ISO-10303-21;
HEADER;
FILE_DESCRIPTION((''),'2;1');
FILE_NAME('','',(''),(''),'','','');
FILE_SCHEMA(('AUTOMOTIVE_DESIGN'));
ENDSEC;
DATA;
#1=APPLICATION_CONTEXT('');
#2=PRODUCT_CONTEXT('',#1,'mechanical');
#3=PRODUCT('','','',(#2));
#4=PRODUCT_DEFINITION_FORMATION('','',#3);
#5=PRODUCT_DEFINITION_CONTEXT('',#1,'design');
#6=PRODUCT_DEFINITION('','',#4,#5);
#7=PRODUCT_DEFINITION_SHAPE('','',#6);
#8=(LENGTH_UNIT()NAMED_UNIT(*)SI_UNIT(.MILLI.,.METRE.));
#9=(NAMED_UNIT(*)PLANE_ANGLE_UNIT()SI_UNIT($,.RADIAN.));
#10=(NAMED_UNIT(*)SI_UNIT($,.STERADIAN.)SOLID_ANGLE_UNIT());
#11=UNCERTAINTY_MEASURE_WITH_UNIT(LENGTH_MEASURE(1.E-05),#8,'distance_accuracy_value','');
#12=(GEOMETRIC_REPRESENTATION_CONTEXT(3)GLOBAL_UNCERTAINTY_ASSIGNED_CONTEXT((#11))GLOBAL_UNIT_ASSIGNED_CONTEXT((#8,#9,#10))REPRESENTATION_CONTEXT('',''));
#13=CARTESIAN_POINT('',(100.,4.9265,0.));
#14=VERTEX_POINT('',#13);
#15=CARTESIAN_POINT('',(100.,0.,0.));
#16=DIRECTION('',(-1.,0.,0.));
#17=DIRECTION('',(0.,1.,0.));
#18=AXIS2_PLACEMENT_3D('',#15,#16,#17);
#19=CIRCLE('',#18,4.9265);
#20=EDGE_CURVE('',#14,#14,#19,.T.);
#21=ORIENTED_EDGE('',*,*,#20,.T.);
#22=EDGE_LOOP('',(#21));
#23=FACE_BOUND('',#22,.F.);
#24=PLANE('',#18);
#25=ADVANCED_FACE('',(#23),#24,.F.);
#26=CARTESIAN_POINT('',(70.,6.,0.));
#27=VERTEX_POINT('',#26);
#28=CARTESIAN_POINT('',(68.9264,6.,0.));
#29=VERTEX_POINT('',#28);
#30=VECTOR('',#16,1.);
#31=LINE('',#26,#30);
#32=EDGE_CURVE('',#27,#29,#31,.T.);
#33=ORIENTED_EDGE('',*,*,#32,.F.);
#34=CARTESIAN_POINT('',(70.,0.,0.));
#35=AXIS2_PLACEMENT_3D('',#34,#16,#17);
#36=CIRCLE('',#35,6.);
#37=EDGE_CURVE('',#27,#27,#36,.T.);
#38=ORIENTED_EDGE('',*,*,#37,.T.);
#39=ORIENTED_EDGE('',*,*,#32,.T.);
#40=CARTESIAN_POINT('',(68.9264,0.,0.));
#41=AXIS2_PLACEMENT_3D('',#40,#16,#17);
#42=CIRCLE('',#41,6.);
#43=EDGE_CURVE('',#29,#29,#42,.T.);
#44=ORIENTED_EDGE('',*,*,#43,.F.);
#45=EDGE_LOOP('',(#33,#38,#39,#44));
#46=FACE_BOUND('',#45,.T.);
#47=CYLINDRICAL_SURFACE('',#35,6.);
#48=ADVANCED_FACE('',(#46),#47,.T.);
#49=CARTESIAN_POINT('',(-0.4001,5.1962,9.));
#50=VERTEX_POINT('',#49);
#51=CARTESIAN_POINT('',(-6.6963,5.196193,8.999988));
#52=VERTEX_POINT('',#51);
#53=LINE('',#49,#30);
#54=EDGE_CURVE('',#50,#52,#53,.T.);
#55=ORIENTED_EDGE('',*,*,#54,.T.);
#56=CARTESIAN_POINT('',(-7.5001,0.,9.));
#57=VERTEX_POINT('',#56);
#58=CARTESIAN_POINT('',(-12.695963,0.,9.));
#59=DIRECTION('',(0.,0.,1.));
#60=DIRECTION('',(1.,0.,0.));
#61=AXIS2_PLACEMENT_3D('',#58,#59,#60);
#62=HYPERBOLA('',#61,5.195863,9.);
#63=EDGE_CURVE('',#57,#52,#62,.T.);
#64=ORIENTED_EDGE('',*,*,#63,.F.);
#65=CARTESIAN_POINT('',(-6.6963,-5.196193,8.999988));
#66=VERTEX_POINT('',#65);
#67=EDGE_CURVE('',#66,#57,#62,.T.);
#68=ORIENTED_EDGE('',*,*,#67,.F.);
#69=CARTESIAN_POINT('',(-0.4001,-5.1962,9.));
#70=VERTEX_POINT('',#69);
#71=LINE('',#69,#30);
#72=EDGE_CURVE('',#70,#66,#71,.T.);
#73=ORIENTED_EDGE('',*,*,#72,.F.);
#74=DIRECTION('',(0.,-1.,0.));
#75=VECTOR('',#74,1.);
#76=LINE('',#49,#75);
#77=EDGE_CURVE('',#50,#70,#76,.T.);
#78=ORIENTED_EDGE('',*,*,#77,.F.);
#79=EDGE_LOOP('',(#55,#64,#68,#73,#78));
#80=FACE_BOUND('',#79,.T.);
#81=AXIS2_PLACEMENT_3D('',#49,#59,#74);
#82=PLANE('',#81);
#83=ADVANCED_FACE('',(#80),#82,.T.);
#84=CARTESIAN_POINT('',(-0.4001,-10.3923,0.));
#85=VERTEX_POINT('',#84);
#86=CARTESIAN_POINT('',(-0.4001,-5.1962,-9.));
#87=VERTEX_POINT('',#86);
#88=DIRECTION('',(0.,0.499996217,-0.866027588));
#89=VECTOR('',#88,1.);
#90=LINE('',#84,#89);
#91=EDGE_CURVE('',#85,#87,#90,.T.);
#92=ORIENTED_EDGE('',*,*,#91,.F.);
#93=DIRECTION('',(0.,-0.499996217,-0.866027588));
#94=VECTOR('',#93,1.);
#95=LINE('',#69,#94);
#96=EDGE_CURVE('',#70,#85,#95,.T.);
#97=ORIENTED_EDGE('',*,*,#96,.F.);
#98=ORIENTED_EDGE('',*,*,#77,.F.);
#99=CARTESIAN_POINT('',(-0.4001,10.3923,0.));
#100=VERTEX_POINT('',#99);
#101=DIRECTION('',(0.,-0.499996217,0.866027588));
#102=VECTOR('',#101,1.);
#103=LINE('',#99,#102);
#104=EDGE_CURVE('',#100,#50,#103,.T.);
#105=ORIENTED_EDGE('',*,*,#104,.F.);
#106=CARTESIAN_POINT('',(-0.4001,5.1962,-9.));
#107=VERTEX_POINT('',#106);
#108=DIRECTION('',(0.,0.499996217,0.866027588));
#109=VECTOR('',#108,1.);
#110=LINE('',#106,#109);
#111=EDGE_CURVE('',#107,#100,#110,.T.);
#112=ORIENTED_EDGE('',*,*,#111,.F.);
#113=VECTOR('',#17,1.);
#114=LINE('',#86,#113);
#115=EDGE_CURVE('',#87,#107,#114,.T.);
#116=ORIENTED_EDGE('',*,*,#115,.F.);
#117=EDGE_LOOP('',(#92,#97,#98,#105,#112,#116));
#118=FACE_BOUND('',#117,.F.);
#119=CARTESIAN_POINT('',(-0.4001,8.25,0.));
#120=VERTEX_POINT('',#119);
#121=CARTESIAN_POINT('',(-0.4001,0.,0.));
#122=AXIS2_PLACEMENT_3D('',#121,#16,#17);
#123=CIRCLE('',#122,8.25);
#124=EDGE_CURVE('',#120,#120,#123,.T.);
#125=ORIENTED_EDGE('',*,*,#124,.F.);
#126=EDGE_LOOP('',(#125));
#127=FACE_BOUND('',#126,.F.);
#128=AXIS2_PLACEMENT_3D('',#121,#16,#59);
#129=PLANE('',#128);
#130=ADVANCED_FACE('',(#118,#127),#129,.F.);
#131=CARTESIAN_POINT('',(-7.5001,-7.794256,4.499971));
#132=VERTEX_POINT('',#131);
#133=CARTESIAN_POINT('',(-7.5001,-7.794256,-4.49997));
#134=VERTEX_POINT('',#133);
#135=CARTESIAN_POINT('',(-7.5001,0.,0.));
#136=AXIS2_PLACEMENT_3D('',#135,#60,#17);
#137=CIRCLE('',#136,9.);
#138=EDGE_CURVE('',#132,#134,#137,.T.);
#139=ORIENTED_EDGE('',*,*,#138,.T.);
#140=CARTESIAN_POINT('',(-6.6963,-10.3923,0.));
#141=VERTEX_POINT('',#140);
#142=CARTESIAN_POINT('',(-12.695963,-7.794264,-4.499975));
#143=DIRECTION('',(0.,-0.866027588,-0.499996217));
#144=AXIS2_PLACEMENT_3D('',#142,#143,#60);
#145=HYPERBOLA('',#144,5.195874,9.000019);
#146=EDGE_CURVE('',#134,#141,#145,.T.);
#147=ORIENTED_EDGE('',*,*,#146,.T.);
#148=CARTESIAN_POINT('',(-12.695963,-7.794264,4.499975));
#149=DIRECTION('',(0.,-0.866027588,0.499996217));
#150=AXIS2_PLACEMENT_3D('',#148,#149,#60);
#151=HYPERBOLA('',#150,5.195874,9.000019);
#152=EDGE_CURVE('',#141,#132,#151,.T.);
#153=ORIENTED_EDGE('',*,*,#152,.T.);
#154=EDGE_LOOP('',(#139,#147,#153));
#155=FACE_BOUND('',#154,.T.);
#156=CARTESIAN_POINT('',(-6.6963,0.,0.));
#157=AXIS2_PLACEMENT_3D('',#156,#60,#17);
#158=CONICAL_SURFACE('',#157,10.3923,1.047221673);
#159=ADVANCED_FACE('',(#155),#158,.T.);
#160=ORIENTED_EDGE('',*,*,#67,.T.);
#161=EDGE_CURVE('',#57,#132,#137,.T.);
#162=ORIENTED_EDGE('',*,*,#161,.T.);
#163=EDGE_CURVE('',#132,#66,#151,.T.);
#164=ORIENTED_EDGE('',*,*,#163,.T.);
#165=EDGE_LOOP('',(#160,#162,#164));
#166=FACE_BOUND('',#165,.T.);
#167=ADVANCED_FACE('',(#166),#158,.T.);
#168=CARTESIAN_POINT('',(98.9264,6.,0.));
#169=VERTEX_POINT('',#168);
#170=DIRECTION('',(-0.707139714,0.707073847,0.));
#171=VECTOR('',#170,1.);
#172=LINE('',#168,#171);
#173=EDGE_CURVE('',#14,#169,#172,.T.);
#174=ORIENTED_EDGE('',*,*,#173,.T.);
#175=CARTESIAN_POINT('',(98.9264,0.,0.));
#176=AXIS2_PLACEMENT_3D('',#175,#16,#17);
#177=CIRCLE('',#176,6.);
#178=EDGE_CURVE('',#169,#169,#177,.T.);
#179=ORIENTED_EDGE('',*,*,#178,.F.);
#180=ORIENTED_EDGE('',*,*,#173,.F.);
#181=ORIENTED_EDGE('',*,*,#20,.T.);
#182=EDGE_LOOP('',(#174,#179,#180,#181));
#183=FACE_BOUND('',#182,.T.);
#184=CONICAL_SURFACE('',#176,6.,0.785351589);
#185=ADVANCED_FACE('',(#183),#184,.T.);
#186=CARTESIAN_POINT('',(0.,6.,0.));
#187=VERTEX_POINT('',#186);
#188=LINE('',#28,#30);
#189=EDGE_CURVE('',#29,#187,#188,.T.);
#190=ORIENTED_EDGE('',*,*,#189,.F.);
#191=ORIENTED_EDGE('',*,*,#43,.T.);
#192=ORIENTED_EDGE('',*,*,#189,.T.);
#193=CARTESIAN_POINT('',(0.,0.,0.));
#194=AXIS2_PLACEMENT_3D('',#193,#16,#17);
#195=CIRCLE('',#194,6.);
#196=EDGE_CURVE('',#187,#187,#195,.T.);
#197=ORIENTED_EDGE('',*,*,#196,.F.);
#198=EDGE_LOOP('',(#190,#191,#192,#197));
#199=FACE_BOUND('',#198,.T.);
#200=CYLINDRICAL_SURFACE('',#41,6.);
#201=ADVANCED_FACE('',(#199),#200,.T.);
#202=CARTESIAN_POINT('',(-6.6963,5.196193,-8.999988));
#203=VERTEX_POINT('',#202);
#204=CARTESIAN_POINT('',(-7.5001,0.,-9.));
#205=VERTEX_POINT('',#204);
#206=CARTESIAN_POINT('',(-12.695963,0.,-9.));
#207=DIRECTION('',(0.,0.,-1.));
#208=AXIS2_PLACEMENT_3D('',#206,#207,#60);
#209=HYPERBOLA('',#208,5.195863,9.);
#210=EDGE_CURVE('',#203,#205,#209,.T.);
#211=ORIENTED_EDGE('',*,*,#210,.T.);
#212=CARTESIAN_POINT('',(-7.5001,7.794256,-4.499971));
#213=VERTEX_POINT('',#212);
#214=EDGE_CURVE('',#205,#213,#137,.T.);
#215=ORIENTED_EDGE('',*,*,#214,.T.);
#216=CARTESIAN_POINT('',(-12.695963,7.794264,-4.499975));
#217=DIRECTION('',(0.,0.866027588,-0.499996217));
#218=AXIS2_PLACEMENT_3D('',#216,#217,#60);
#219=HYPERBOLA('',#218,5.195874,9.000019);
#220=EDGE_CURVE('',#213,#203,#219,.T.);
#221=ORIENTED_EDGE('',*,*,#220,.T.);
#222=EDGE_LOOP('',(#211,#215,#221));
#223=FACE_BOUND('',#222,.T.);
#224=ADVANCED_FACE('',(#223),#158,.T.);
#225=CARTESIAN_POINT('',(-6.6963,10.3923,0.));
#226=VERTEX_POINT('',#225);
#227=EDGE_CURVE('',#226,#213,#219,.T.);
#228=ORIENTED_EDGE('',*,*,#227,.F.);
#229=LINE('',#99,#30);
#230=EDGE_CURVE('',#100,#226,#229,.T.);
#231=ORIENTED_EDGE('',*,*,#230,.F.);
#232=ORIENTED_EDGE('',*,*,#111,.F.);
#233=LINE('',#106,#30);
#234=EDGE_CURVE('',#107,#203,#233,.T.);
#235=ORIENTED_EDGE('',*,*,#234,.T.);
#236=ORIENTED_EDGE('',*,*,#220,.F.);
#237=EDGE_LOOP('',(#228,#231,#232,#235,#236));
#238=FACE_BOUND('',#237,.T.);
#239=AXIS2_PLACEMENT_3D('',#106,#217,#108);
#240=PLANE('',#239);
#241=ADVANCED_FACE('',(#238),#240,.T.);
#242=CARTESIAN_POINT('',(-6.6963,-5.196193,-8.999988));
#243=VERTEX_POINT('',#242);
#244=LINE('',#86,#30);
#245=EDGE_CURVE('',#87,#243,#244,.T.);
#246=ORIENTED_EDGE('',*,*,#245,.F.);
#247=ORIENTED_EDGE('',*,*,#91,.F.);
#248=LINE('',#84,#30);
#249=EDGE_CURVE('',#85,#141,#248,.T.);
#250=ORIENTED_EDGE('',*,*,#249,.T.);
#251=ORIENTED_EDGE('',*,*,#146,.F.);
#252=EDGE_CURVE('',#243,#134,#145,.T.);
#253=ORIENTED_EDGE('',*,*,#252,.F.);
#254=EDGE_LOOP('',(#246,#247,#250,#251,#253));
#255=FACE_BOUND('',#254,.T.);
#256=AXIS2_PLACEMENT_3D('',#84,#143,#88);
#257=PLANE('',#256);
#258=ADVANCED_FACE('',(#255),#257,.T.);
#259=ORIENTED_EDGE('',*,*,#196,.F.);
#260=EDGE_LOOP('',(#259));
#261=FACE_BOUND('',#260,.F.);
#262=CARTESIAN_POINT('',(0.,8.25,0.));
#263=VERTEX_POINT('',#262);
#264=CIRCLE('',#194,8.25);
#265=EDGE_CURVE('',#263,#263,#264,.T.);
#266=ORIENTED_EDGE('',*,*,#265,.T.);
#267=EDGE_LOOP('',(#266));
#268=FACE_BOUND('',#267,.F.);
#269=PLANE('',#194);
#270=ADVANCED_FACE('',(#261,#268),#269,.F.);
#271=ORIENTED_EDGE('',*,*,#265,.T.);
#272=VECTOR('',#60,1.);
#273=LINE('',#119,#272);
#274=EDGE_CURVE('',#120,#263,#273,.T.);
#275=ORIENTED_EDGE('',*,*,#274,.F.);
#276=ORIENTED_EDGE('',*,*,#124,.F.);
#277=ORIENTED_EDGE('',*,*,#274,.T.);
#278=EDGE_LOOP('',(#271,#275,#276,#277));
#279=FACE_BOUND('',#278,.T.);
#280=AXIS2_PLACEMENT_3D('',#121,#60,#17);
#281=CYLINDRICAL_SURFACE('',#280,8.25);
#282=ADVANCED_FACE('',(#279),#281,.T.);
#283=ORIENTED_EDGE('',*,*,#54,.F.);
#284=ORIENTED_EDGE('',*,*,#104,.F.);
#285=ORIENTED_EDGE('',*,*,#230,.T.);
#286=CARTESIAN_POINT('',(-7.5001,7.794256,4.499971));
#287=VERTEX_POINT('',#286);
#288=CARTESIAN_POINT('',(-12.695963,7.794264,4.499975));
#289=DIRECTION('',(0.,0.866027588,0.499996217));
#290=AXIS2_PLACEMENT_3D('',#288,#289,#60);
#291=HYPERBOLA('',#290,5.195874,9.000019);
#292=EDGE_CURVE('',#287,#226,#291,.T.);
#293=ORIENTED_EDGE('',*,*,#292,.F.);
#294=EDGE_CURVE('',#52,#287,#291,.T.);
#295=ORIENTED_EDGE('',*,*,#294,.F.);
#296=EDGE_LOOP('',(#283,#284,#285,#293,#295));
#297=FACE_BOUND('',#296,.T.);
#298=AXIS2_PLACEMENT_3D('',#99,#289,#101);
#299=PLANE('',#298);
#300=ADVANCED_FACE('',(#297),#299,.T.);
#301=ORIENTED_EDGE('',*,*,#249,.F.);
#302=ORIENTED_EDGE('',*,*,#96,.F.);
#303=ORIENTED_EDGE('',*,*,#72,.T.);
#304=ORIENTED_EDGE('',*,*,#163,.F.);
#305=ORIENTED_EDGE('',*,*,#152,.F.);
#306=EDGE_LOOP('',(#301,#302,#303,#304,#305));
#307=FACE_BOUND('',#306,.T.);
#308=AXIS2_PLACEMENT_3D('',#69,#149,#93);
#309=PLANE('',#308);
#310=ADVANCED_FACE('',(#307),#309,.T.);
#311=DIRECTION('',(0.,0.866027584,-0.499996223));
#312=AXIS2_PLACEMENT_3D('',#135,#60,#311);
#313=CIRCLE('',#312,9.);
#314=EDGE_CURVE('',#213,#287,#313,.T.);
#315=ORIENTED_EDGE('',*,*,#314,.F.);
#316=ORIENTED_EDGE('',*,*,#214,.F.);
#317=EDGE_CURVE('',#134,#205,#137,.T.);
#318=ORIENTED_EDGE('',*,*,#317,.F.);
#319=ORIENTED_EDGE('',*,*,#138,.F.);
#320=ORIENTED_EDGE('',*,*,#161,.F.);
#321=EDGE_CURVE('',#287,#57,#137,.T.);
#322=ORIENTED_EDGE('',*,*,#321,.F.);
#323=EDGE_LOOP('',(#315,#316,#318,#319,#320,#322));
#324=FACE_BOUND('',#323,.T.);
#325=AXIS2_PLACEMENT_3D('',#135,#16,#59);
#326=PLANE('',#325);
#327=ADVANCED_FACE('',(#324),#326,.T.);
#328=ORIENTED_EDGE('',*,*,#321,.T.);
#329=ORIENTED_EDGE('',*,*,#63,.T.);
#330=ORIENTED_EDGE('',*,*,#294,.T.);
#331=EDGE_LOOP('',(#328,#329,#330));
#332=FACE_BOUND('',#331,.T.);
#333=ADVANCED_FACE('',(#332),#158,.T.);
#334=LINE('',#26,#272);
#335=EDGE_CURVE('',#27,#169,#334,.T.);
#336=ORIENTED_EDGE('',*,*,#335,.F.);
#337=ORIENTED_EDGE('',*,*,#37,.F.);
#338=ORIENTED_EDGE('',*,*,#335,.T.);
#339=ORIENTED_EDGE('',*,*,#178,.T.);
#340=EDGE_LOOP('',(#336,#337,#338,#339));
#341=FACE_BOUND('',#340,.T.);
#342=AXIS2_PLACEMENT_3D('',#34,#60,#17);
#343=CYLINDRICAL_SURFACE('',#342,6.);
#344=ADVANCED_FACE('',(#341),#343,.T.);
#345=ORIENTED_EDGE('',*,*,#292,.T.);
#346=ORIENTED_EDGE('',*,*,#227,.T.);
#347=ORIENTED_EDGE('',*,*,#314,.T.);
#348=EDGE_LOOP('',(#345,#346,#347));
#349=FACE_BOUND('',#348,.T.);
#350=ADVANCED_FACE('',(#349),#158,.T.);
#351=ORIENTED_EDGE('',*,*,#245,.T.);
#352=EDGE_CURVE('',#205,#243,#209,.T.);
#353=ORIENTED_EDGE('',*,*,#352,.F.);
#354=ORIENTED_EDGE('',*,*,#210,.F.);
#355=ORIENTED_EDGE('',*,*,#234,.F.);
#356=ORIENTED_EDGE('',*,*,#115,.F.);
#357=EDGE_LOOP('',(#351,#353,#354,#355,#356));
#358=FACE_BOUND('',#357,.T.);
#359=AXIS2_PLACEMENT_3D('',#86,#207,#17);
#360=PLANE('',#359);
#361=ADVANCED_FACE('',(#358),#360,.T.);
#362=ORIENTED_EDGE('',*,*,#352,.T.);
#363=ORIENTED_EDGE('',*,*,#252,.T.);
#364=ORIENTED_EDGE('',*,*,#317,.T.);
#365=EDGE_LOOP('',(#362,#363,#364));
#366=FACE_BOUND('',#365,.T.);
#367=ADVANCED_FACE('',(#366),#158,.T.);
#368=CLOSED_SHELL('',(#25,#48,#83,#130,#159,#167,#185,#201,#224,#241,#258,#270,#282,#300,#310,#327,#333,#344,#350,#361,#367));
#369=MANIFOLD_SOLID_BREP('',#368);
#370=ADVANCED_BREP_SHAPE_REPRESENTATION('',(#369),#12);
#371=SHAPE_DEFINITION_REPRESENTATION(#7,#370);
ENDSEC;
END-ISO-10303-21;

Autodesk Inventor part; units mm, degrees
ref_plane "YZ Plane" through (0, 0, 0) normal (1, 0, 0) x (0, 1, 0)
ref_plane "XZ Plane" through (0, 0, 0) normal (0, 1, 0) x (-1, 0, 0)
sketch "草图1" plane through (0, 0, 0) normal (0, 0, 1) x (1, 0, 0)
  line L0 (0, 8.25) -> (0, 6)
  line L1 (70, 6) -> (100, 6)
  line L2 (100, 6) -> (100, 0)
  line L3 (100, 0) -> (-0.4001, 0)
  line L4 (-20.4801, 0) -> (120.08, 0) projected
  line L5 (-0.4001, 0) -> (-0.4001, 8.25)
  line L6 (-0.4001, 8.25) -> (0, 8.25)
  line L7 (70, 6) -> (68.9264, 6)
  line L8 (68.9264, 6) -> (0, 6)
  line L9 (0, -1.65) -> (0, 9.9) projected
  dimension "d0" = 100
  dimension "d1" = 30
  dimension "d2" = 12
  dimension "d9" = 0.4001
  dimension "d10" = 16.5
  dimension "d13" = 1.0736
  dimension "d14" = 12
revolve "轴承体" add sketch "草图1" angle 360 about axis through (100, 0, 0) along (-1, 0, 0)
sketch "草图2" plane through (-0.4001, 0, 0) normal (-1, 0, 0) x (0, 0, 1)
  line L0 (0, 10.3923) -> (9, 5.1962)
  line L1 (9, 5.1962) -> (9, -5.1962)
  line L2 (9, -5.1962) -> (0, -10.3923)
  line L3 (0, -10.3923) -> (-9, -5.1962)
  line L4 (-9, -5.1962) -> (-9, 5.1962)
  line L5 (-9, 5.1962) -> (0, 10.3923)
  point P0 (0, 0)
  point P1 (0, 0)
  dimension "d11" = 18
extrude "头" add sketch "草图2" along normal blind 7.1
sketch "草图4" plane through (0, 0, 0) normal (0, 0, 1) x (1, 0, 0)
  line L0 (-7.5001, 9) -> (-7.5001, 10.3923)
  line L1 (-7.5001, 10.3923) -> (-6.6963, 10.3923)
  line L2 (-6.6963, 10.3923) -> (-7.5001, 9)
  line L3 (-8.9201, 0) -> (1.0199, 0) projected
  line L4 (-0.4001, 10.3923) -> (-7.5001, 10.3923) projected
  line L5 (-7.5001, 5.1962) -> (-7.5001, 10.3923) projected
  dimension "d5" = 30
  dimension "d19" = 18
revolve "倒角1" cut sketch "草图4" angle 360 about axis through (-10, 0, 0) along (1, 0, 0)
thread "螺纹" size "M12x1.75" designation "M12" class "6g" standard "GB Metric profile" length 30
chamfer "倒角2" distance 1.0735 distance2 1.0736 1 edges at (100, -6, 0) measured on face at (100, 1.8579, -1.646)
ref_plane "Work Plane1" through (1.525, 0, 0) normal (0, 0, 1) x (1, 0, 0)
equation "\"d11\" = SW"
equation "\"d3\" = KOH - SD"
equation "\"d15\" = GEL"
equation "\"d6\" = -0.5 * SPD + 0.5 * GD"
equation "\"d0\" = NLG"
equation "\"d1\" = GEL"
equation "\"d2\" = GD"
equation "\"d10\" = SD2"
equation "\"d14\" = BDM"
equation "\"d5\" = ANG1"
equation "\"d19\" = SW0"
equation "\"NLG\" = 100"
equation "\"GD\" = NND"
equation "\"BDM\" = NND"
equation "\"KOH\" = 7.5"
equation "\"GEL\" = 30"
equation "\"SW\" = 18"
equation "\"SW0\" = SW"
equation "\"SPD\" = NND - 1.2269 * PTC"
equation "\"SD2\" = SDH"
equation "\"SD\" = WFT"
equation "\"ANG1\" = 30deg"
equation "\"GAL\" = 0.61345 * PTC"
equation "\"GUL\" = 0.61345 * PTC"
equation "\"RR\" = 0.6"
equation "\"WFT\" = 0.4"
equation "\"GD1\" = THREADDIA - 1.2269 * PTC"
equation "\"THREADDIA\" = 12"
equation "\"SDH\" = 16.5"
equation "\"TOA\" = 30deg"
equation "\"FAWI\" = 45deg"
equation "\"PTC\" = 1.75"
equation "\"NND\" = 12"
equation "\"E0\" = 1.155 * SW"
properties part number "螺栓 GB/T 5782 M12 x 100" material "钢，软"
